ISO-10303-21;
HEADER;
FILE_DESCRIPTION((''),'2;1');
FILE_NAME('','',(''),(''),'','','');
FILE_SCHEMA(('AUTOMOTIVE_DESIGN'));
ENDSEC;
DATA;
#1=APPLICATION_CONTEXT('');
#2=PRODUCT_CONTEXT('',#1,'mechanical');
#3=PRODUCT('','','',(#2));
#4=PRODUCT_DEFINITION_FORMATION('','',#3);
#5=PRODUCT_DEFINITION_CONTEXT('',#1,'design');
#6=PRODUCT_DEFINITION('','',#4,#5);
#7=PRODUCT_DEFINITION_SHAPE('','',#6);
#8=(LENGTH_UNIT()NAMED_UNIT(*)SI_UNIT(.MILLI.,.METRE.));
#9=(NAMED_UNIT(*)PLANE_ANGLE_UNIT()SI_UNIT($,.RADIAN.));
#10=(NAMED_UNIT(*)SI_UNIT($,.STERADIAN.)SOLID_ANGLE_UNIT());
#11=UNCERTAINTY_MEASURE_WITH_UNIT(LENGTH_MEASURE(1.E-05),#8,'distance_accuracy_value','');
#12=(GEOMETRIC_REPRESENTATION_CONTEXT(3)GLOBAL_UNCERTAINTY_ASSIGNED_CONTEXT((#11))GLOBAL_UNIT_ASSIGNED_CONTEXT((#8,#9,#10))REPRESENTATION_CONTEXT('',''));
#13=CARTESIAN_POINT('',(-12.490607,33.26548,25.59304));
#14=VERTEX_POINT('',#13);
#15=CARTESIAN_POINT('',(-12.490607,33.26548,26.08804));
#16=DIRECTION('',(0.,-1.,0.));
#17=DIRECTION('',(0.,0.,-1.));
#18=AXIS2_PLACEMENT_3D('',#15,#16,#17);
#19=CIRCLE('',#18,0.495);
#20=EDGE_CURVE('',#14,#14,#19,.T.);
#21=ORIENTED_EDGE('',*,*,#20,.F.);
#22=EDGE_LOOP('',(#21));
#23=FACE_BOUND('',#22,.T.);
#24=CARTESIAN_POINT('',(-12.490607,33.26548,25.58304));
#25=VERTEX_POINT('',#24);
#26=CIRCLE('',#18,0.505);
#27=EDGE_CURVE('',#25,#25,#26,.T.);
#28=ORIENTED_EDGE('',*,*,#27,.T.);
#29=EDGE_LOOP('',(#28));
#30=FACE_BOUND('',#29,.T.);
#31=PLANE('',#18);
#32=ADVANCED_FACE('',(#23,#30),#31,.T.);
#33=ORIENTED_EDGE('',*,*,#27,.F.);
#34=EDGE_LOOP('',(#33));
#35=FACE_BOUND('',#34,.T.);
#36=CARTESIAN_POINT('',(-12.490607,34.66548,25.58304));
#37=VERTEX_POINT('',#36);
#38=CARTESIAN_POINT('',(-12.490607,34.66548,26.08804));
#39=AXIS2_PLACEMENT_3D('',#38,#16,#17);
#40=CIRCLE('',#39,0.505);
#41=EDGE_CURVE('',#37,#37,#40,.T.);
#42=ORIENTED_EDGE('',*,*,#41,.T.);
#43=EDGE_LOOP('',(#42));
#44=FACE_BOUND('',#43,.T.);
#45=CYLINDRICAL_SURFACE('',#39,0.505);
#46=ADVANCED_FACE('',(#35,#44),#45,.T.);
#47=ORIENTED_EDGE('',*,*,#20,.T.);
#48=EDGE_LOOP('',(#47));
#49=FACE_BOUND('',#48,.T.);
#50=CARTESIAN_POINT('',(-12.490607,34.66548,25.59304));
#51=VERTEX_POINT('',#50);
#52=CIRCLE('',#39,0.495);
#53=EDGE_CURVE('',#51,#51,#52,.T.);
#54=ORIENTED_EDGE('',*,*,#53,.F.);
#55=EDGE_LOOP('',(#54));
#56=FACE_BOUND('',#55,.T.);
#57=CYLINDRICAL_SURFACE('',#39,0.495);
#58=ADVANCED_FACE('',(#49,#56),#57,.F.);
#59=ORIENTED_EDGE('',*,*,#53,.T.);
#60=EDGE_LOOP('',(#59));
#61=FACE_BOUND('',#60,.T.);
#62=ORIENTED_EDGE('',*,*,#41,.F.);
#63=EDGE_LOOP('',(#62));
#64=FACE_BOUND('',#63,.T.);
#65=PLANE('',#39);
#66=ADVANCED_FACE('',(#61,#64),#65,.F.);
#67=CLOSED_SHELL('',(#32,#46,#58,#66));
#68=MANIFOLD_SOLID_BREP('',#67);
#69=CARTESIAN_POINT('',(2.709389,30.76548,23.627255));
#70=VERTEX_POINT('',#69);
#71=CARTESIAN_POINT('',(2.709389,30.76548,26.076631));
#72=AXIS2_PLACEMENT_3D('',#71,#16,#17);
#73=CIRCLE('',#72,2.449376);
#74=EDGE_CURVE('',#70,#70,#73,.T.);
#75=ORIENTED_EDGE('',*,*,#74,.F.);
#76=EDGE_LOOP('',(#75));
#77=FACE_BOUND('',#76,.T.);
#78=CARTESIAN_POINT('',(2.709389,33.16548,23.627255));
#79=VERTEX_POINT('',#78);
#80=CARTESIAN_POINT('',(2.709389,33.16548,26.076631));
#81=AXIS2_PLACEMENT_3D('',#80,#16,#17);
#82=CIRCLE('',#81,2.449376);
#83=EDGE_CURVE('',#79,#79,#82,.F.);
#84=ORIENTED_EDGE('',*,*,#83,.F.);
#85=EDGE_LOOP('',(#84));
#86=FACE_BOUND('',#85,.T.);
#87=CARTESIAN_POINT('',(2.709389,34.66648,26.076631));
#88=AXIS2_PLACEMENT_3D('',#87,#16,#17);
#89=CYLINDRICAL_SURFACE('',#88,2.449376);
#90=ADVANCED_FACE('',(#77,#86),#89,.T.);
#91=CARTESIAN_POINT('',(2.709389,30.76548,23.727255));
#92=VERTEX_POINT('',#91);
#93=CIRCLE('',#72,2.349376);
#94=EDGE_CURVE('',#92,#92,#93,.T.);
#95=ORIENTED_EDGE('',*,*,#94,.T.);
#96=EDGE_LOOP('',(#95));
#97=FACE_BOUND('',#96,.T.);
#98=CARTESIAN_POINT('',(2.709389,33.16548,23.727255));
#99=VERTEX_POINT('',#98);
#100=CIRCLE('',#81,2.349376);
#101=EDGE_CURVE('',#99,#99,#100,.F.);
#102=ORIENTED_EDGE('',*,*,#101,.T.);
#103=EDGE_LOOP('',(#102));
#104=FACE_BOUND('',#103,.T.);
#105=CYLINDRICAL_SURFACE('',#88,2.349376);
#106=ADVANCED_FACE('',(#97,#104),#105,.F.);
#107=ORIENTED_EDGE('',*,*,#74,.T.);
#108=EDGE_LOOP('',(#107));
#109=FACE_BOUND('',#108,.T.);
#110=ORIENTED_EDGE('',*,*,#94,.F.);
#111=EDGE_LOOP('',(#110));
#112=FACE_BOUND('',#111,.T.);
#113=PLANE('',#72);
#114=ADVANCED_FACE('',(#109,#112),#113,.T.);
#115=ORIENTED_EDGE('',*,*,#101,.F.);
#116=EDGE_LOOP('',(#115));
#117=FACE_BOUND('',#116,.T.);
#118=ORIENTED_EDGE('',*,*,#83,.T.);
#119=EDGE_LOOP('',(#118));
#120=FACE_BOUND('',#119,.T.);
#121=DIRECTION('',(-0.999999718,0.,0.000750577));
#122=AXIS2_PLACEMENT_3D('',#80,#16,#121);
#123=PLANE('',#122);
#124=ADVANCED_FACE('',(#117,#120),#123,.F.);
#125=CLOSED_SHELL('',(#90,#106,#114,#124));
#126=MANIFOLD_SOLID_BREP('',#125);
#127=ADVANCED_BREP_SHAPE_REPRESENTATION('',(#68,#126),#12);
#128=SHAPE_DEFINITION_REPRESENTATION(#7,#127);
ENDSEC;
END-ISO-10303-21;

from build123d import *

# Parameters (mm, degrees)
SKETCH_1_R      = 2.449376165
SKETCH_1_R_2    = 2.349376165
EXTRUDE_1_DEPTH = 2.4
SKETCH_2_R      = 0.505
SKETCH_2_R_2    = 0.495
EXTRUDE_3_DEPTH = 1.4


# Read off the part's stored shape, not the designer's step: microservoAssembly.STEP-1/microservoArm_A2.STEP-1-surface1
with BuildPart() as part:
    # 草图1 → 凸台-拉伸1 (new body)
    with BuildSketch(Plane.XZ.offset(-30.765480349)):
        with Locations(Location((2.709389171, 26.076630937, 0), (0, 0, 270))):
            Circle(SKETCH_1_R)
        with Locations(Location((2.709389171, 26.076630937, 0), (0, 0, 270))):
            Circle(SKETCH_1_R_2, mode=Mode.SUBTRACT)
    extrude(amount=-EXTRUDE_1_DEPTH)


with BuildPart() as body_2:
    # 草图2 → 凸台-拉伸3 (new body)
    with BuildSketch(Plane.XZ.offset(-33.265480349)):
        with Locations(Location((-12.490606547, 26.088039712, 0), (0, 0, 270))):
            Circle(SKETCH_2_R)
        with Locations(Location((-12.490606547, 26.088039712, 0), (0, 0, 270))):
            Circle(SKETCH_2_R_2, mode=Mode.SUBTRACT)
    extrude(amount=-EXTRUDE_3_DEPTH)


solid = Compound([part.part, body_2.part])
